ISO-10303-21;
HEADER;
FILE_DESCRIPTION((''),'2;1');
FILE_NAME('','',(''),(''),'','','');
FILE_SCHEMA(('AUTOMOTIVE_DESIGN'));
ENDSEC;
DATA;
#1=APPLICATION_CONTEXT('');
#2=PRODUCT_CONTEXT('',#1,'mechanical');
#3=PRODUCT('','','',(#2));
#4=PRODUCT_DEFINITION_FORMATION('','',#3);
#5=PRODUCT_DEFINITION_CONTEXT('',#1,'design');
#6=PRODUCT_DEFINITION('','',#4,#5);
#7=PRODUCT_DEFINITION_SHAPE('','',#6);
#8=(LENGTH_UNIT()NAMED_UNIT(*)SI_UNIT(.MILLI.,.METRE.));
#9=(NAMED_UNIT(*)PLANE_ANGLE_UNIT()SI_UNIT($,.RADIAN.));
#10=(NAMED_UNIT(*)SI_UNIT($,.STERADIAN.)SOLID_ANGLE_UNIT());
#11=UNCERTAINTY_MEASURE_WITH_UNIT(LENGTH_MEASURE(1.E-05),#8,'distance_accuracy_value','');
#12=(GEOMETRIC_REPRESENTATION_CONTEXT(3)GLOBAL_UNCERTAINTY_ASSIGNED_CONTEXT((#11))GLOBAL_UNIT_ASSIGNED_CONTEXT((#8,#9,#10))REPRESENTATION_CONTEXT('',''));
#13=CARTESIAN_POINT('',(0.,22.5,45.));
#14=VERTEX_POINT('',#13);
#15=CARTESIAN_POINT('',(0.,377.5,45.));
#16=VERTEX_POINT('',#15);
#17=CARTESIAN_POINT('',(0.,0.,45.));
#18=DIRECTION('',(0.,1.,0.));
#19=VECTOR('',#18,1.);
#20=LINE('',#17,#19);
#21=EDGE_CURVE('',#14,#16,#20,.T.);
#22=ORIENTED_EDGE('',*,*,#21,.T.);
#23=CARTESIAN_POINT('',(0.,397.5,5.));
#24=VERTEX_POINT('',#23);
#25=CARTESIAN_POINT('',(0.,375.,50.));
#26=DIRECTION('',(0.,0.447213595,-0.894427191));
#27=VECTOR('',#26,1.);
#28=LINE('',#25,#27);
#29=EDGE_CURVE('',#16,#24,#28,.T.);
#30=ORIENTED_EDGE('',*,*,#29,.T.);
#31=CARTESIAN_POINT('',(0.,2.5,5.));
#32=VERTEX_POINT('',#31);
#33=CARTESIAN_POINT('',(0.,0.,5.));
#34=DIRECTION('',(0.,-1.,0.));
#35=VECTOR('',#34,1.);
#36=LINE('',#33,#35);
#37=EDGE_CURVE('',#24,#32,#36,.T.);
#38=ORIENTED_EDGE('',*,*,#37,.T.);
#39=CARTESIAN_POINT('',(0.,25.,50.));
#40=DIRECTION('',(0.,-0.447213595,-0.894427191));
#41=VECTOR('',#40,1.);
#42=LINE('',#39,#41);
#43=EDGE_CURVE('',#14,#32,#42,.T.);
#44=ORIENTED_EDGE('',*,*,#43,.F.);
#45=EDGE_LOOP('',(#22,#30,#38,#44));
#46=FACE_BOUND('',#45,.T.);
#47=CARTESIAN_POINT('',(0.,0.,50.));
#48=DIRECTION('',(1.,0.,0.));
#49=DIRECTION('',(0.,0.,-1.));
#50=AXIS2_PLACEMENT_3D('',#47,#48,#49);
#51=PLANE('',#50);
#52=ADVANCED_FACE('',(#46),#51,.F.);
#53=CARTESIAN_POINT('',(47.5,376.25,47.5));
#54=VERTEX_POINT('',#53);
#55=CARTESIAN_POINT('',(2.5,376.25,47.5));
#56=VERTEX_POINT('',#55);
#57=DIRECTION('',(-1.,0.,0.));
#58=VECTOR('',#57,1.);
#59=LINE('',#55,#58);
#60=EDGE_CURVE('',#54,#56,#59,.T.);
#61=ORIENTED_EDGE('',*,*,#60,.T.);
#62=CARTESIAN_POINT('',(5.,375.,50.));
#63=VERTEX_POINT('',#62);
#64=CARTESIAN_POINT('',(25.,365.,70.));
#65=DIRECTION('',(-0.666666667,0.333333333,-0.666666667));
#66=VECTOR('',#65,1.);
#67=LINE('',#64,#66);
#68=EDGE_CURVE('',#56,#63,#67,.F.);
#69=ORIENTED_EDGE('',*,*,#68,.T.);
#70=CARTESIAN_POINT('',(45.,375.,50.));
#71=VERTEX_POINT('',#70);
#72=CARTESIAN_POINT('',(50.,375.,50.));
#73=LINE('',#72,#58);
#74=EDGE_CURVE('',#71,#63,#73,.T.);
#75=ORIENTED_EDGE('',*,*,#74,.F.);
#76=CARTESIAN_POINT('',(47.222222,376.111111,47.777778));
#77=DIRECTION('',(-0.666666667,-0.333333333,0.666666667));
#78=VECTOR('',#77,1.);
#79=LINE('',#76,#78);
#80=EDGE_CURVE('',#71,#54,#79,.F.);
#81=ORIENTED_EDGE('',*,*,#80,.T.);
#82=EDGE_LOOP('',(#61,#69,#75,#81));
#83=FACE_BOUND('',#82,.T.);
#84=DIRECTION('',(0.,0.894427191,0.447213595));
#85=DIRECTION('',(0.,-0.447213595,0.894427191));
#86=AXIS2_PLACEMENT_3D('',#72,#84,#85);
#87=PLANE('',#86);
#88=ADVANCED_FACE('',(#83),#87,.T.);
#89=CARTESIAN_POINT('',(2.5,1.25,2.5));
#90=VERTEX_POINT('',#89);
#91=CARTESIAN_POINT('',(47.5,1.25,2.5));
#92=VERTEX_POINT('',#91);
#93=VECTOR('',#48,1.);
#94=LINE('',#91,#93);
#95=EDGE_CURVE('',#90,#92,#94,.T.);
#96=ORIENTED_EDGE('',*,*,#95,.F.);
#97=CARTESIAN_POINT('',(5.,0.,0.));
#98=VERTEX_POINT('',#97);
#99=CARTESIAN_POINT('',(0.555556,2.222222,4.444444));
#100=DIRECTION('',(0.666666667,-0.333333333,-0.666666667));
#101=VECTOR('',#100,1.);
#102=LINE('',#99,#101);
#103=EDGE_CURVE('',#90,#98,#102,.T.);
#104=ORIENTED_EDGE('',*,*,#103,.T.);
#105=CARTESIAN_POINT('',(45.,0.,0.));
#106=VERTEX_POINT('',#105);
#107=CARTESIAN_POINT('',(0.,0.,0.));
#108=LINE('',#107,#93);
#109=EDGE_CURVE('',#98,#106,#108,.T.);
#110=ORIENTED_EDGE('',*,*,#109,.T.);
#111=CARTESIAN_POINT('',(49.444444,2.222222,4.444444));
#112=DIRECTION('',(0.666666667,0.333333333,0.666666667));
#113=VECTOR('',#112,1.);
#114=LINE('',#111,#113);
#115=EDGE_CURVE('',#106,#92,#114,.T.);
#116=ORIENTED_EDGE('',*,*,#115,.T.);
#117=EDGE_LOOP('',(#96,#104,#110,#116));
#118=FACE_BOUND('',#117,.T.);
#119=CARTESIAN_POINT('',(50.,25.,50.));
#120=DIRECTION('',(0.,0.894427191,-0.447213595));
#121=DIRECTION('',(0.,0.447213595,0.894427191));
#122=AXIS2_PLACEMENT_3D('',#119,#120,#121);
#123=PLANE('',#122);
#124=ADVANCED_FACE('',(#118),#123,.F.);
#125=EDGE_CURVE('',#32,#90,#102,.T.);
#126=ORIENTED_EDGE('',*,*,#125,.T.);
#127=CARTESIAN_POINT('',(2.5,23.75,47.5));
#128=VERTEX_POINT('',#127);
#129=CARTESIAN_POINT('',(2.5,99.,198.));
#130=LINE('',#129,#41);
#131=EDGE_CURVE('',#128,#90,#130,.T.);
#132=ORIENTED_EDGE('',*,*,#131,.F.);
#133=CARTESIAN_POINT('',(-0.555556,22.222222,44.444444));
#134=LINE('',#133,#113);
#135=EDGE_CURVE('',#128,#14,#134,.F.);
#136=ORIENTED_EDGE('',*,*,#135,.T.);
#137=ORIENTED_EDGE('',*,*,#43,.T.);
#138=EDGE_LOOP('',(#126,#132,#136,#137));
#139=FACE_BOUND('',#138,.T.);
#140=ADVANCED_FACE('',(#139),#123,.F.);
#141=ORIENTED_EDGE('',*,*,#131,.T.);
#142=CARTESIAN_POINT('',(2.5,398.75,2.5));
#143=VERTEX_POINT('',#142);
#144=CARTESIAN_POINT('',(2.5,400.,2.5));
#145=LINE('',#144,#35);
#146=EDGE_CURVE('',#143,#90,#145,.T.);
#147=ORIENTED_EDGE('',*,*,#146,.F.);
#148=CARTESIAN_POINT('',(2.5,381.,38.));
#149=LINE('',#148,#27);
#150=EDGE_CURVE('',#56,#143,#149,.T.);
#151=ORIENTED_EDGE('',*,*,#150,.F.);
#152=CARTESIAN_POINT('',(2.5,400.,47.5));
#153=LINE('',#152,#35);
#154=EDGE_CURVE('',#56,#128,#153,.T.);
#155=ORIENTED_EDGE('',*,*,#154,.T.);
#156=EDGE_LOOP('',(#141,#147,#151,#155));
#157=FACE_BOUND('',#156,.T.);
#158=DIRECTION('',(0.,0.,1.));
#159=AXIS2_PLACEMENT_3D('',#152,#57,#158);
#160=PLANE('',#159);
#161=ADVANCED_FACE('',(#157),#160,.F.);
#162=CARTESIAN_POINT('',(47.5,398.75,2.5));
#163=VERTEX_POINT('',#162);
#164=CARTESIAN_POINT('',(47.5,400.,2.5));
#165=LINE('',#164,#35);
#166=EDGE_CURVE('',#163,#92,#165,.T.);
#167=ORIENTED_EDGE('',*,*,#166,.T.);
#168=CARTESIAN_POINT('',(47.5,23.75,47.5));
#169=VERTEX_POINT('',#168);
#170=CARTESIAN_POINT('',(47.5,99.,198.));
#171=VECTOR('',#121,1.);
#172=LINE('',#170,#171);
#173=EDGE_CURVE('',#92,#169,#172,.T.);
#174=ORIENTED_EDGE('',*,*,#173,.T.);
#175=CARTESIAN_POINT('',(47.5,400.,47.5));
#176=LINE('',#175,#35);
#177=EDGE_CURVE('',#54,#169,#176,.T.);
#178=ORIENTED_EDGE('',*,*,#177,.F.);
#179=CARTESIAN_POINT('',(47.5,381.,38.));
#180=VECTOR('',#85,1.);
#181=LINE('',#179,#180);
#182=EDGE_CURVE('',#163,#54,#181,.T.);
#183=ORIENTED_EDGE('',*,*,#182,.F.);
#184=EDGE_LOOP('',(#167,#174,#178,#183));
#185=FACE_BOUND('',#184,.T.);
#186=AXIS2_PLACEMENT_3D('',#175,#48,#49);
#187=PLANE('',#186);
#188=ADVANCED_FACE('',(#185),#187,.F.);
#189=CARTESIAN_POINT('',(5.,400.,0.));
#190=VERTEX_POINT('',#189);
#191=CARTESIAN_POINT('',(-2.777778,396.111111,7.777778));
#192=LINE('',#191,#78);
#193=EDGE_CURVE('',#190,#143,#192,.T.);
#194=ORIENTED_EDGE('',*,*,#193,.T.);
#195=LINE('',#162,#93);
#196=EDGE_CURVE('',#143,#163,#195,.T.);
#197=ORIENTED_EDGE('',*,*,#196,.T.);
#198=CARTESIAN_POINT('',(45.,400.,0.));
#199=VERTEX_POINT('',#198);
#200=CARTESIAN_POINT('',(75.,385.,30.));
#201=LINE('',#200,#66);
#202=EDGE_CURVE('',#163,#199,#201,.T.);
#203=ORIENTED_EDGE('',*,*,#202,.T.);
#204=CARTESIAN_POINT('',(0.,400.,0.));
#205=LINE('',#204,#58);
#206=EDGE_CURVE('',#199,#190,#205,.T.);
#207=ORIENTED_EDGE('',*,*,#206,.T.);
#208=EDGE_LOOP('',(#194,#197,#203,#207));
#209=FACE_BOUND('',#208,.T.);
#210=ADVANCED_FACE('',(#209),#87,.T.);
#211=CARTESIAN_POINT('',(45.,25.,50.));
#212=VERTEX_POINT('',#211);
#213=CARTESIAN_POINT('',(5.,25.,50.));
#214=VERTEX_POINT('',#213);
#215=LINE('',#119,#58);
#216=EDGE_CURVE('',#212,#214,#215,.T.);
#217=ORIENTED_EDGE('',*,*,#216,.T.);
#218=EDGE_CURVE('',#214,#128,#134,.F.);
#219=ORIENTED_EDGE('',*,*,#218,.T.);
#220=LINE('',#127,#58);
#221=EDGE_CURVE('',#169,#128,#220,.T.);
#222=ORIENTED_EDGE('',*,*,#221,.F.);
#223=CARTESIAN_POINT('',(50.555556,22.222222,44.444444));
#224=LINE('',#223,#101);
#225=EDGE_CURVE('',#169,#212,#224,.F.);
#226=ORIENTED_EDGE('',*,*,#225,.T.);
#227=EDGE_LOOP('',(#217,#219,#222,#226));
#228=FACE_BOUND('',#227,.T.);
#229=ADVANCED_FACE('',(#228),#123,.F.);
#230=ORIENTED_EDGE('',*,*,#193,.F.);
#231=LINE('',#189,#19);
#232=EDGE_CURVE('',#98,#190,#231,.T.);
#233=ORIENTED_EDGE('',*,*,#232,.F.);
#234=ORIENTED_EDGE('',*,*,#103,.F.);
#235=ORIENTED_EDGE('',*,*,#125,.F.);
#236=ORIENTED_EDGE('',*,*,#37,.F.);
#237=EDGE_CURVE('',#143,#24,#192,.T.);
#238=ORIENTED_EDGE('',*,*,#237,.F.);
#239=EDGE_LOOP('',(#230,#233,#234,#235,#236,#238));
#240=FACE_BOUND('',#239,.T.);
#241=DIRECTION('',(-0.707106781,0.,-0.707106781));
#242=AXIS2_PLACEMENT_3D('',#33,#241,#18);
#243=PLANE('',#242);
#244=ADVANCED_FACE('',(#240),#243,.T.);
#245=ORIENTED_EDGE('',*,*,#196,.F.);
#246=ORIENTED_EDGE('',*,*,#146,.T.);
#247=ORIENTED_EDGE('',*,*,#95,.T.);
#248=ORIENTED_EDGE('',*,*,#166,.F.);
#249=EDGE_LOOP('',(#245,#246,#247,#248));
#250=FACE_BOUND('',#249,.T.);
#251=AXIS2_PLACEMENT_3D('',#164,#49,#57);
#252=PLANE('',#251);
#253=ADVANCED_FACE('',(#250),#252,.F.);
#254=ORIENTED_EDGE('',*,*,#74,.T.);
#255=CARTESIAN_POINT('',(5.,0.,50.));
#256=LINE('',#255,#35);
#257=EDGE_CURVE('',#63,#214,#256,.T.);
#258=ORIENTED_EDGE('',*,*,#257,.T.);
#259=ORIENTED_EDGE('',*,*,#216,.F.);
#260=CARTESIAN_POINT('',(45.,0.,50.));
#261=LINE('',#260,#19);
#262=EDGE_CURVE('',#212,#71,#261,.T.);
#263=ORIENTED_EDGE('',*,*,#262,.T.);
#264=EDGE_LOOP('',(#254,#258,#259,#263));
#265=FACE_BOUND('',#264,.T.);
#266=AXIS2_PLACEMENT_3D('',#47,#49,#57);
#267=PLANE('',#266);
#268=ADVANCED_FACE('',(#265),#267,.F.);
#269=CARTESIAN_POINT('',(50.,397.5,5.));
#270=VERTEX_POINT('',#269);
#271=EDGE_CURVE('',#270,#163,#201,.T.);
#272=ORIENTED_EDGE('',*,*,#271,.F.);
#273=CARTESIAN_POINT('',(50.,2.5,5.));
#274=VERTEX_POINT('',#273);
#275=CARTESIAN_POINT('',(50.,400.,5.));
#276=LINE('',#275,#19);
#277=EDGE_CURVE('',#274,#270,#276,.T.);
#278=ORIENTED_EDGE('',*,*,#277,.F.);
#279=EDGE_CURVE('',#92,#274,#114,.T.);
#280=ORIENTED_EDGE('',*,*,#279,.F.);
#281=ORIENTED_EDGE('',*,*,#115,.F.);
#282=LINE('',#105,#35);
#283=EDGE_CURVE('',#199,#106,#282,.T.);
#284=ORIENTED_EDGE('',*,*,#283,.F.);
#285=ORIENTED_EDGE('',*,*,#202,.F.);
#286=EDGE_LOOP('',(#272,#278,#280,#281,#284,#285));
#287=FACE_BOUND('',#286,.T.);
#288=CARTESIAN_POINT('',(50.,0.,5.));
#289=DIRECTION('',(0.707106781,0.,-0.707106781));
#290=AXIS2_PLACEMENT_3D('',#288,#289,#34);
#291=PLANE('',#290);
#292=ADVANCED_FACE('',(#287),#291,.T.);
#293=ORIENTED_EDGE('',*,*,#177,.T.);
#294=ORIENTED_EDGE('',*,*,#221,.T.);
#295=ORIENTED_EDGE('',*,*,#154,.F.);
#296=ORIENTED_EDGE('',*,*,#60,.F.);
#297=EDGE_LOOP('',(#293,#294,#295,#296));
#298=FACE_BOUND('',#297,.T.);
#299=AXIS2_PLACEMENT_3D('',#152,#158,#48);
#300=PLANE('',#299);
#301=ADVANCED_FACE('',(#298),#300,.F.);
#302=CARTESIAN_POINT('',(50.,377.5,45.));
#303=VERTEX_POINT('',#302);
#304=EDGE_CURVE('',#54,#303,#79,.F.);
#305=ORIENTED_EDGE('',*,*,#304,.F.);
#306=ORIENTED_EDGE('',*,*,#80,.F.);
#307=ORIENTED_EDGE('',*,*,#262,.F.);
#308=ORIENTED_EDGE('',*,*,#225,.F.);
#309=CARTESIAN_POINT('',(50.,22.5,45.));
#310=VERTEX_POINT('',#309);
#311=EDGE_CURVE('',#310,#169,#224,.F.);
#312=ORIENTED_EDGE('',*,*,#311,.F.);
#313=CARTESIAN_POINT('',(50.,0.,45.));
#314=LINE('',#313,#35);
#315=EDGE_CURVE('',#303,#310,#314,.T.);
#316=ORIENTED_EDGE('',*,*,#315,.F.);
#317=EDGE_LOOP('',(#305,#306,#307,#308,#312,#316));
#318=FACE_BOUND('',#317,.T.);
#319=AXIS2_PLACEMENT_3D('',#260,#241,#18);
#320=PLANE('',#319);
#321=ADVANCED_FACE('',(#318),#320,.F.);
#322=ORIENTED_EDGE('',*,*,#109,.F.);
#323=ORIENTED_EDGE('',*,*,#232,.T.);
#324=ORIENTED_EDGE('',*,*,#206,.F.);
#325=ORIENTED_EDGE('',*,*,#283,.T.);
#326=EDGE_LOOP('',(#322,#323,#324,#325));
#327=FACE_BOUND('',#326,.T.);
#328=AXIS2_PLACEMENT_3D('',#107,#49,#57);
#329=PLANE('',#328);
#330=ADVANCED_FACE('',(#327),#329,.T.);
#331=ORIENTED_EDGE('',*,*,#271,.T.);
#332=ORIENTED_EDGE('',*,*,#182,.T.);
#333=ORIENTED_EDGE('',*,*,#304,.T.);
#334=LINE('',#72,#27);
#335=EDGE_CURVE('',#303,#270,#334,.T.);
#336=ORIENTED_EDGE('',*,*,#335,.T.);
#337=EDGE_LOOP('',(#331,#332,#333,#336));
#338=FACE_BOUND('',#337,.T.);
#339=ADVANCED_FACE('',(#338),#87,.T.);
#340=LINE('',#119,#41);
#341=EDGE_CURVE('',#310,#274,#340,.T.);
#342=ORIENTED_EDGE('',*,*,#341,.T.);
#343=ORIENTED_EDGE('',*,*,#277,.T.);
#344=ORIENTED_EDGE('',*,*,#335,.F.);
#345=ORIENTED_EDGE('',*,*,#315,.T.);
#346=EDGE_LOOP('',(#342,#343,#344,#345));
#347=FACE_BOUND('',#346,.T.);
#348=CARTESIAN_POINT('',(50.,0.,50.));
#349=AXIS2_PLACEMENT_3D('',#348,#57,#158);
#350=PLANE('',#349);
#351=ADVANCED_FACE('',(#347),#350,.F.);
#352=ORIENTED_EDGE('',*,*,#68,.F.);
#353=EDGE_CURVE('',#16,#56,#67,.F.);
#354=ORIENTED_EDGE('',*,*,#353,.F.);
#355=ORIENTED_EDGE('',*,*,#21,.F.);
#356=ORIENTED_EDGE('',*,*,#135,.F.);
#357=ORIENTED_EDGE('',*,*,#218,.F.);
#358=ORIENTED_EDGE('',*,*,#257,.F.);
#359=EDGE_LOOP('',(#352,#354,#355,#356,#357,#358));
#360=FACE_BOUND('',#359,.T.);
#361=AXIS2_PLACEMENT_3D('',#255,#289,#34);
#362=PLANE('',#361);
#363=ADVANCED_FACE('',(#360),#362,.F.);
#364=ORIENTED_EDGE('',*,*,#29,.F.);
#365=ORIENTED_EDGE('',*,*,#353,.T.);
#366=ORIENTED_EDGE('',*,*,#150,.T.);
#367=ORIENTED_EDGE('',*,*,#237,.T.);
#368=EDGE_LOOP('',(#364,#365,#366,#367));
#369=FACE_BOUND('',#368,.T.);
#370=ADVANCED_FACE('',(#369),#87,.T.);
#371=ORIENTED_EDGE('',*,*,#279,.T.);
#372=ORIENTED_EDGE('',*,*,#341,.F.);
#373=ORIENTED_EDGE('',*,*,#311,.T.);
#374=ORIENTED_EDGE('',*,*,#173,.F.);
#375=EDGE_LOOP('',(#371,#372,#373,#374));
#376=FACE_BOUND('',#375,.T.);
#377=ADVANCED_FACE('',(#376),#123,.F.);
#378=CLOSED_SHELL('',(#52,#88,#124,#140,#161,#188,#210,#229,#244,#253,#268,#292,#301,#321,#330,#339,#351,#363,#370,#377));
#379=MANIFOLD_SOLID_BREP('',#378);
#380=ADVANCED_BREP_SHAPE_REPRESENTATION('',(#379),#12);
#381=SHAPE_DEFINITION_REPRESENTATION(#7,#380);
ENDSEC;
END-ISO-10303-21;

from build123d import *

# Parameters (mm, degrees)
SKETCH1_W           = 50
SKETCH1_H           = 400
BOSS_EXTRUDE2_DEPTH = 50
SKETCH2_W           = 45
SKETCH2_H           = 45
CUT_EXTRUDE1_DEPTH  = 407.201920232
CUT_EXTRUDE2_DEPTH  = 407.201920232
CHAMFER1_SIZE       = 5


with BuildPart() as part:
    # Sketch1 → Boss-Extrude2 (new body)
    with BuildSketch(Plane.XY):
        with Locations((25, 200)):
            Rectangle(SKETCH1_W, SKETCH1_H)
    extrude(amount=BOSS_EXTRUDE2_DEPTH)

    # Sketch2 → Cut-Extrude1 (cut, through all)
    with BuildSketch(Plane.XZ):
        with Locations((25, 25)):
            Rectangle(SKETCH2_W, SKETCH2_H)
    extrude(amount=-CUT_EXTRUDE1_DEPTH, mode=Mode.SUBTRACT)

    # Sketch3 → Cut-Extrude2 (cut, through all)
    with BuildSketch(Plane.ZY):
        Polygon((0, 400), (50, 400), (50, 375), align=None)
        Polygon((0, 0), (50, 0), (50, 25), align=None)
    extrude(amount=-CUT_EXTRUDE2_DEPTH, mode=Mode.SUBTRACT)

    # Chamfer1
    chamfer1_edges = [part.edges().sort_by_distance(p)[0] for p in [
        (0, 200, 50),
        (50, 200, 50),
        (50, 200, 0),
        (0, 200, 0),
    ]]
    chamfer(chamfer1_edges, length=CHAMFER1_SIZE - 0.0001)  # a hair under: the kernel refuses the full size


solid = part.part
